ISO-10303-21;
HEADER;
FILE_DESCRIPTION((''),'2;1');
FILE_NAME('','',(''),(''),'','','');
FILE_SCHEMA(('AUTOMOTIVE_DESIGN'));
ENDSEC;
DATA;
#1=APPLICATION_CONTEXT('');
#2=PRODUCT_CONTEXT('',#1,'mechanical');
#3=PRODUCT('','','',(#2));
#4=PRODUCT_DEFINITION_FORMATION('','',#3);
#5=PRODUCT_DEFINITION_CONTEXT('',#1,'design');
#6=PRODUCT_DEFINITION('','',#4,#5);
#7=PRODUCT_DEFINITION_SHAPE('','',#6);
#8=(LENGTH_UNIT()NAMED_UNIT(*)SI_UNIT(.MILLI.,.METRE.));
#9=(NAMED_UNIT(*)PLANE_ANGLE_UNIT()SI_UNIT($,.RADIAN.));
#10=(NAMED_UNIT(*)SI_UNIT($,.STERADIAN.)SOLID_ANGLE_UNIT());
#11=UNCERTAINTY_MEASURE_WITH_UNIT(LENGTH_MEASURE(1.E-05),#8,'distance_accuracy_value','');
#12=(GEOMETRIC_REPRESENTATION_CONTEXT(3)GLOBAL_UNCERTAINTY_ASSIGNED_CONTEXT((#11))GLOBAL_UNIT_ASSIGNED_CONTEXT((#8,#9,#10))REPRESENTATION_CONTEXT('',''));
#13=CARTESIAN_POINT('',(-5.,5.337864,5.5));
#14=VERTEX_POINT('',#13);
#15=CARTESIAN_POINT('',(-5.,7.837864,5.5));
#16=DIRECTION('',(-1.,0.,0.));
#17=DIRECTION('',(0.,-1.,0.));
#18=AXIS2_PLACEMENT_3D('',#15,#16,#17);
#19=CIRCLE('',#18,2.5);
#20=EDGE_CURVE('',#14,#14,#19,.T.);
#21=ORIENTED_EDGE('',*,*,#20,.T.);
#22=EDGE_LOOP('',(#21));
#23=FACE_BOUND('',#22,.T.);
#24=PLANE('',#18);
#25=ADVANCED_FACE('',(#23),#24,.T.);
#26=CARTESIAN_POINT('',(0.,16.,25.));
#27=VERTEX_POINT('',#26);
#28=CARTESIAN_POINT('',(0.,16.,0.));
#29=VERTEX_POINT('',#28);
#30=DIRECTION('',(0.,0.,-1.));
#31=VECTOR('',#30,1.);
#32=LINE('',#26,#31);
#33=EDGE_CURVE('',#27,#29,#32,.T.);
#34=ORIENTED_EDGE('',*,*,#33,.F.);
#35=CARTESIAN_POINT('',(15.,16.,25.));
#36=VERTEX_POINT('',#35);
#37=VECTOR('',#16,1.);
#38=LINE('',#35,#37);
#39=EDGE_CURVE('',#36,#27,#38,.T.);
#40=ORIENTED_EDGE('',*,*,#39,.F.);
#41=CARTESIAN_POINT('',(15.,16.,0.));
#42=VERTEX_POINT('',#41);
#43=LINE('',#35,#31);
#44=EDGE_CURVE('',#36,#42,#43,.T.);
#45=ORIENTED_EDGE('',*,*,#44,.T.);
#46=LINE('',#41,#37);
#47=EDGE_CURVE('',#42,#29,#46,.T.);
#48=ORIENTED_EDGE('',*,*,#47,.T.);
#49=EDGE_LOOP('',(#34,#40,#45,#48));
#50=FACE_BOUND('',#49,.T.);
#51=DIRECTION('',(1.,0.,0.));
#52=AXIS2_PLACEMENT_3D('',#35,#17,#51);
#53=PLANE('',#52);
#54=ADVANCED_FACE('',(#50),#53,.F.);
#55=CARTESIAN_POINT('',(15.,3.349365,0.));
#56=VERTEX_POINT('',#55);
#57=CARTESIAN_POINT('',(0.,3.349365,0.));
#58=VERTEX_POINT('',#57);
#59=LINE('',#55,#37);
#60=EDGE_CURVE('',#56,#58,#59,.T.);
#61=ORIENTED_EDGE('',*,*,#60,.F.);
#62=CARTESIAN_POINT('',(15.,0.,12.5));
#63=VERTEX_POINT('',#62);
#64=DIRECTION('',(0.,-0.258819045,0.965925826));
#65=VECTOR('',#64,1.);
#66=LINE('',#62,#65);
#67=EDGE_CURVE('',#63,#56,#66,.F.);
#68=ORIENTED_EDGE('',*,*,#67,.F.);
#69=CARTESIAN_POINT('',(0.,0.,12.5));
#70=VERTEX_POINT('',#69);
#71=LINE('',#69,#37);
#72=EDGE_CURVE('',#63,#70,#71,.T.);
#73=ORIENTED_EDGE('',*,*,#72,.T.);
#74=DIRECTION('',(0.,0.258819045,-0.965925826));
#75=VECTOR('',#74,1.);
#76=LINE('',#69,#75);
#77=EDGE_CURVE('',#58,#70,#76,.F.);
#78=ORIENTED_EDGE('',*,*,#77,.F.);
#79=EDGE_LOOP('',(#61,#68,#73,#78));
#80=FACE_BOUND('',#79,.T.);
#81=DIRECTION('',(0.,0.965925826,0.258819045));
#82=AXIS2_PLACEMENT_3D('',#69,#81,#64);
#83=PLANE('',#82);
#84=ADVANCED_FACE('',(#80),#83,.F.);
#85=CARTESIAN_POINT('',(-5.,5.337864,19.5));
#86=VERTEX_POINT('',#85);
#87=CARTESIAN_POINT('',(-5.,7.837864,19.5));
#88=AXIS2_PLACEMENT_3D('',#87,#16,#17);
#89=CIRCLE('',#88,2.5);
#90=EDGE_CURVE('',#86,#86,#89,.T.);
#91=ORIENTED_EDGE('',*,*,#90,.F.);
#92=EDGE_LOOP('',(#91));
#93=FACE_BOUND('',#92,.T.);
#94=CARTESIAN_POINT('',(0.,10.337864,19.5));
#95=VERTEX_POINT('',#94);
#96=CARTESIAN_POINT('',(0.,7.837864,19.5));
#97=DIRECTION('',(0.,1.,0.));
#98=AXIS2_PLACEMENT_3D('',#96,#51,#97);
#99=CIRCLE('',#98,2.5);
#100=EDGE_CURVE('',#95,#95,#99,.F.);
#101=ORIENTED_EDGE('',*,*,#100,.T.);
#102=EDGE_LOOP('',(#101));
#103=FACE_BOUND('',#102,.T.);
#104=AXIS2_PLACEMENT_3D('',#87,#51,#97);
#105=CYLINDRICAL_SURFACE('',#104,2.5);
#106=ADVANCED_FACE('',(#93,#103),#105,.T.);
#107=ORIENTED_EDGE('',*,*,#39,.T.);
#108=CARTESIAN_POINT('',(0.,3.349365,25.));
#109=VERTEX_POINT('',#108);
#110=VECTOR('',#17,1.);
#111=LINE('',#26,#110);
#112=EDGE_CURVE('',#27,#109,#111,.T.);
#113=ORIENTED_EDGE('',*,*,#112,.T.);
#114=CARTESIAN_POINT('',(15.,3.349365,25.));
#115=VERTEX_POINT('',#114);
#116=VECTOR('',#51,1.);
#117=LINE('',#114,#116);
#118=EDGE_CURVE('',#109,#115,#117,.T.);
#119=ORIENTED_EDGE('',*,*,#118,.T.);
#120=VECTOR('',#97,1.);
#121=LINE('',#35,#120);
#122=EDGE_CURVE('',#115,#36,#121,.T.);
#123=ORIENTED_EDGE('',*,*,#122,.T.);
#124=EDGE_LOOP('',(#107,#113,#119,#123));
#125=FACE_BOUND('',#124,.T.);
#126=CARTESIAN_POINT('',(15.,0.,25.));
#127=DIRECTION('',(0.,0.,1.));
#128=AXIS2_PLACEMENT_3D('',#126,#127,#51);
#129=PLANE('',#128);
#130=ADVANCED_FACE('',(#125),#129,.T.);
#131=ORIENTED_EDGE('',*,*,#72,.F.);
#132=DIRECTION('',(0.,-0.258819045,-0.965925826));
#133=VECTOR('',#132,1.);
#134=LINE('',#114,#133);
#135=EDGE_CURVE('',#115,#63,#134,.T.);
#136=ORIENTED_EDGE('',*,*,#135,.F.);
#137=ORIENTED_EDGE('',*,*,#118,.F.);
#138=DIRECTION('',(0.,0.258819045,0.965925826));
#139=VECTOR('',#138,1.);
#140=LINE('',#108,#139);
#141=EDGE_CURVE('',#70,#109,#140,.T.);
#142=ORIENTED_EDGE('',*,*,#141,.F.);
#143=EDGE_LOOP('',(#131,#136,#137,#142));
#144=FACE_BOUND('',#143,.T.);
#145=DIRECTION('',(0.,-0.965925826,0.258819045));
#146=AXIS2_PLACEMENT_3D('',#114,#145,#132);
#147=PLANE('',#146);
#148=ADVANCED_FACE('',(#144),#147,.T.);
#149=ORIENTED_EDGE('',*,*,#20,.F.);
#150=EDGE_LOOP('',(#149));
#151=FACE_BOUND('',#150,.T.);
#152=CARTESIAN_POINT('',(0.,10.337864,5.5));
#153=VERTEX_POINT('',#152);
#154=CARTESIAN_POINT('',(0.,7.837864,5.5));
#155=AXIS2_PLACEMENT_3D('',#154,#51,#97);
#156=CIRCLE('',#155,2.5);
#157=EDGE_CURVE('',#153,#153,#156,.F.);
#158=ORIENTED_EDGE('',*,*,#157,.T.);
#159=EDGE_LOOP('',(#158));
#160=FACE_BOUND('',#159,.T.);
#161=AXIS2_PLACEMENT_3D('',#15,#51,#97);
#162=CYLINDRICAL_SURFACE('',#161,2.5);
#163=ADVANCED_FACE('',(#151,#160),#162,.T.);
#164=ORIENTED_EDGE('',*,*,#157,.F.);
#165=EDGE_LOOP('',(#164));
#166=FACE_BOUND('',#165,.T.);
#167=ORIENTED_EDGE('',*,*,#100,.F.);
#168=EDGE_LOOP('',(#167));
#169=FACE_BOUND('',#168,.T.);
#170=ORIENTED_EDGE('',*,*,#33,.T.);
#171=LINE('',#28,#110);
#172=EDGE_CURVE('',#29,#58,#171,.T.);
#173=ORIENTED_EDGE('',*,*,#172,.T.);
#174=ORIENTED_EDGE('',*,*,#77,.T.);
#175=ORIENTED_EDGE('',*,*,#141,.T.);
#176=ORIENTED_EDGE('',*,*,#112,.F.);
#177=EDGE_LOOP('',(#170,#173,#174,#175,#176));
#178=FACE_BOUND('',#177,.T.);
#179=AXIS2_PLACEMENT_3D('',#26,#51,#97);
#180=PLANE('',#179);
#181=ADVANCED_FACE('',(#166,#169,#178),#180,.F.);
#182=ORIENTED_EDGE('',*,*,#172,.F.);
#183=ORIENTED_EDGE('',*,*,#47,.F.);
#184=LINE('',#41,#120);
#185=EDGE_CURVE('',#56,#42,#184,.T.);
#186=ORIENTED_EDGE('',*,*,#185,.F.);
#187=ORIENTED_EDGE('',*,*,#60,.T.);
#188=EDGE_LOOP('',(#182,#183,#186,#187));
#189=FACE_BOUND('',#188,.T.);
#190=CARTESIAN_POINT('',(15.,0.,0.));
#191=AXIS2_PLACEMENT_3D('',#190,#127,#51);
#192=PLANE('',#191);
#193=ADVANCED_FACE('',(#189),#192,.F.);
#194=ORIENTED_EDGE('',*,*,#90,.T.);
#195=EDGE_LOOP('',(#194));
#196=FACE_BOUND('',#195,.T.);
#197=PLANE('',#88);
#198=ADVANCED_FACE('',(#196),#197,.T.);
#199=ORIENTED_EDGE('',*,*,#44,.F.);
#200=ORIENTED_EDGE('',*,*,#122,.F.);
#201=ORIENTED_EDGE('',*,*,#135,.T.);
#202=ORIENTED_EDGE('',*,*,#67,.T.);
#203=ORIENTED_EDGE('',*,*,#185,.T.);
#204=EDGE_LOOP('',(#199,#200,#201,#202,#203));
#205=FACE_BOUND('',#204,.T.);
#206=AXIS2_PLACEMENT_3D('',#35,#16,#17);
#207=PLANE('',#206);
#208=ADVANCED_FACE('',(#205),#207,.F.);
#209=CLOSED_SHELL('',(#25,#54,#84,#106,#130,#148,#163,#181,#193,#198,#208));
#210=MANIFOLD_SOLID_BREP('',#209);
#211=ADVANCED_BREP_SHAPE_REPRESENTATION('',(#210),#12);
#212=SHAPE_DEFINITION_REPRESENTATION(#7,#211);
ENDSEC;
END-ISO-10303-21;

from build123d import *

# Parameters (mm, degrees)
SKETCH2_W           = 15
SKETCH2_H           = 16
BOSS_EXTRUDE2_DEPTH = 25
SKETCH3_R           = 2.5
BOSS_EXTRUDE3_DEPTH = 5
CHAMFER1_SIZE       = 12.5
CHAMFER1_SIZE2      = 3.349364905
CHAMFER2_SIZE       = 12.5
CHAMFER2_SIZE_2     = 3.349364905


with BuildPart() as part:
    # Sketch2 → Boss-Extrude2 (new body)
    with BuildSketch(Plane.XY):
        with Locations((7.5, 8)):
            Rectangle(SKETCH2_W, SKETCH2_H)
    extrude(amount=BOSS_EXTRUDE2_DEPTH)

    # Sketch3 → Boss-Extrude3 (add)
    with BuildSketch(Plane.ZY):
        with Locations(Location((5.5, 7.837863741, 0), (0, 0, 90))):
            Circle(SKETCH3_R)
        with Locations(Location((19.5, 7.837863741, 0), (0, 0, 90))):
            Circle(SKETCH3_R)
    extrude(amount=BOSS_EXTRUDE3_DEPTH)

    # Chamfer1
    chamfer1_edges = [part.edges().sort_by_distance(p)[0] for p in [
        (7.5, 0, 25),
    ]]
    chamfer1_side = [part.faces().sort_by_distance(p)[0] for p in [
        (7.5, 0, 12.5),
    ]]
    chamfer(chamfer1_edges, length=CHAMFER1_SIZE, length2=CHAMFER1_SIZE2, reference=chamfer1_side[0])

    # Chamfer2
    # the kernel refuses this chamfer: 12.5, 3.349364905 mm, written as the material it takes off along each edge
    with BuildSketch(Plane(origin=(-32.459019628, 0, 0), x_dir=(0, -0.009967146577156423, 0.9999503267608394), z_dir=(1, 0, 0))) as chamfer2_piece_1:
        Polygon((CHAMFER2_SIZE * 0.999950326761, -CHAMFER2_SIZE * 0.00996714657716), (-CHAMFER2_SIZE_2 * 0.00996714657831, -CHAMFER2_SIZE_2 * 0.999950326877), (0, 0), align=None)
    extrude(amount=79.918039255, mode=Mode.SUBTRACT)


solid = part.part
